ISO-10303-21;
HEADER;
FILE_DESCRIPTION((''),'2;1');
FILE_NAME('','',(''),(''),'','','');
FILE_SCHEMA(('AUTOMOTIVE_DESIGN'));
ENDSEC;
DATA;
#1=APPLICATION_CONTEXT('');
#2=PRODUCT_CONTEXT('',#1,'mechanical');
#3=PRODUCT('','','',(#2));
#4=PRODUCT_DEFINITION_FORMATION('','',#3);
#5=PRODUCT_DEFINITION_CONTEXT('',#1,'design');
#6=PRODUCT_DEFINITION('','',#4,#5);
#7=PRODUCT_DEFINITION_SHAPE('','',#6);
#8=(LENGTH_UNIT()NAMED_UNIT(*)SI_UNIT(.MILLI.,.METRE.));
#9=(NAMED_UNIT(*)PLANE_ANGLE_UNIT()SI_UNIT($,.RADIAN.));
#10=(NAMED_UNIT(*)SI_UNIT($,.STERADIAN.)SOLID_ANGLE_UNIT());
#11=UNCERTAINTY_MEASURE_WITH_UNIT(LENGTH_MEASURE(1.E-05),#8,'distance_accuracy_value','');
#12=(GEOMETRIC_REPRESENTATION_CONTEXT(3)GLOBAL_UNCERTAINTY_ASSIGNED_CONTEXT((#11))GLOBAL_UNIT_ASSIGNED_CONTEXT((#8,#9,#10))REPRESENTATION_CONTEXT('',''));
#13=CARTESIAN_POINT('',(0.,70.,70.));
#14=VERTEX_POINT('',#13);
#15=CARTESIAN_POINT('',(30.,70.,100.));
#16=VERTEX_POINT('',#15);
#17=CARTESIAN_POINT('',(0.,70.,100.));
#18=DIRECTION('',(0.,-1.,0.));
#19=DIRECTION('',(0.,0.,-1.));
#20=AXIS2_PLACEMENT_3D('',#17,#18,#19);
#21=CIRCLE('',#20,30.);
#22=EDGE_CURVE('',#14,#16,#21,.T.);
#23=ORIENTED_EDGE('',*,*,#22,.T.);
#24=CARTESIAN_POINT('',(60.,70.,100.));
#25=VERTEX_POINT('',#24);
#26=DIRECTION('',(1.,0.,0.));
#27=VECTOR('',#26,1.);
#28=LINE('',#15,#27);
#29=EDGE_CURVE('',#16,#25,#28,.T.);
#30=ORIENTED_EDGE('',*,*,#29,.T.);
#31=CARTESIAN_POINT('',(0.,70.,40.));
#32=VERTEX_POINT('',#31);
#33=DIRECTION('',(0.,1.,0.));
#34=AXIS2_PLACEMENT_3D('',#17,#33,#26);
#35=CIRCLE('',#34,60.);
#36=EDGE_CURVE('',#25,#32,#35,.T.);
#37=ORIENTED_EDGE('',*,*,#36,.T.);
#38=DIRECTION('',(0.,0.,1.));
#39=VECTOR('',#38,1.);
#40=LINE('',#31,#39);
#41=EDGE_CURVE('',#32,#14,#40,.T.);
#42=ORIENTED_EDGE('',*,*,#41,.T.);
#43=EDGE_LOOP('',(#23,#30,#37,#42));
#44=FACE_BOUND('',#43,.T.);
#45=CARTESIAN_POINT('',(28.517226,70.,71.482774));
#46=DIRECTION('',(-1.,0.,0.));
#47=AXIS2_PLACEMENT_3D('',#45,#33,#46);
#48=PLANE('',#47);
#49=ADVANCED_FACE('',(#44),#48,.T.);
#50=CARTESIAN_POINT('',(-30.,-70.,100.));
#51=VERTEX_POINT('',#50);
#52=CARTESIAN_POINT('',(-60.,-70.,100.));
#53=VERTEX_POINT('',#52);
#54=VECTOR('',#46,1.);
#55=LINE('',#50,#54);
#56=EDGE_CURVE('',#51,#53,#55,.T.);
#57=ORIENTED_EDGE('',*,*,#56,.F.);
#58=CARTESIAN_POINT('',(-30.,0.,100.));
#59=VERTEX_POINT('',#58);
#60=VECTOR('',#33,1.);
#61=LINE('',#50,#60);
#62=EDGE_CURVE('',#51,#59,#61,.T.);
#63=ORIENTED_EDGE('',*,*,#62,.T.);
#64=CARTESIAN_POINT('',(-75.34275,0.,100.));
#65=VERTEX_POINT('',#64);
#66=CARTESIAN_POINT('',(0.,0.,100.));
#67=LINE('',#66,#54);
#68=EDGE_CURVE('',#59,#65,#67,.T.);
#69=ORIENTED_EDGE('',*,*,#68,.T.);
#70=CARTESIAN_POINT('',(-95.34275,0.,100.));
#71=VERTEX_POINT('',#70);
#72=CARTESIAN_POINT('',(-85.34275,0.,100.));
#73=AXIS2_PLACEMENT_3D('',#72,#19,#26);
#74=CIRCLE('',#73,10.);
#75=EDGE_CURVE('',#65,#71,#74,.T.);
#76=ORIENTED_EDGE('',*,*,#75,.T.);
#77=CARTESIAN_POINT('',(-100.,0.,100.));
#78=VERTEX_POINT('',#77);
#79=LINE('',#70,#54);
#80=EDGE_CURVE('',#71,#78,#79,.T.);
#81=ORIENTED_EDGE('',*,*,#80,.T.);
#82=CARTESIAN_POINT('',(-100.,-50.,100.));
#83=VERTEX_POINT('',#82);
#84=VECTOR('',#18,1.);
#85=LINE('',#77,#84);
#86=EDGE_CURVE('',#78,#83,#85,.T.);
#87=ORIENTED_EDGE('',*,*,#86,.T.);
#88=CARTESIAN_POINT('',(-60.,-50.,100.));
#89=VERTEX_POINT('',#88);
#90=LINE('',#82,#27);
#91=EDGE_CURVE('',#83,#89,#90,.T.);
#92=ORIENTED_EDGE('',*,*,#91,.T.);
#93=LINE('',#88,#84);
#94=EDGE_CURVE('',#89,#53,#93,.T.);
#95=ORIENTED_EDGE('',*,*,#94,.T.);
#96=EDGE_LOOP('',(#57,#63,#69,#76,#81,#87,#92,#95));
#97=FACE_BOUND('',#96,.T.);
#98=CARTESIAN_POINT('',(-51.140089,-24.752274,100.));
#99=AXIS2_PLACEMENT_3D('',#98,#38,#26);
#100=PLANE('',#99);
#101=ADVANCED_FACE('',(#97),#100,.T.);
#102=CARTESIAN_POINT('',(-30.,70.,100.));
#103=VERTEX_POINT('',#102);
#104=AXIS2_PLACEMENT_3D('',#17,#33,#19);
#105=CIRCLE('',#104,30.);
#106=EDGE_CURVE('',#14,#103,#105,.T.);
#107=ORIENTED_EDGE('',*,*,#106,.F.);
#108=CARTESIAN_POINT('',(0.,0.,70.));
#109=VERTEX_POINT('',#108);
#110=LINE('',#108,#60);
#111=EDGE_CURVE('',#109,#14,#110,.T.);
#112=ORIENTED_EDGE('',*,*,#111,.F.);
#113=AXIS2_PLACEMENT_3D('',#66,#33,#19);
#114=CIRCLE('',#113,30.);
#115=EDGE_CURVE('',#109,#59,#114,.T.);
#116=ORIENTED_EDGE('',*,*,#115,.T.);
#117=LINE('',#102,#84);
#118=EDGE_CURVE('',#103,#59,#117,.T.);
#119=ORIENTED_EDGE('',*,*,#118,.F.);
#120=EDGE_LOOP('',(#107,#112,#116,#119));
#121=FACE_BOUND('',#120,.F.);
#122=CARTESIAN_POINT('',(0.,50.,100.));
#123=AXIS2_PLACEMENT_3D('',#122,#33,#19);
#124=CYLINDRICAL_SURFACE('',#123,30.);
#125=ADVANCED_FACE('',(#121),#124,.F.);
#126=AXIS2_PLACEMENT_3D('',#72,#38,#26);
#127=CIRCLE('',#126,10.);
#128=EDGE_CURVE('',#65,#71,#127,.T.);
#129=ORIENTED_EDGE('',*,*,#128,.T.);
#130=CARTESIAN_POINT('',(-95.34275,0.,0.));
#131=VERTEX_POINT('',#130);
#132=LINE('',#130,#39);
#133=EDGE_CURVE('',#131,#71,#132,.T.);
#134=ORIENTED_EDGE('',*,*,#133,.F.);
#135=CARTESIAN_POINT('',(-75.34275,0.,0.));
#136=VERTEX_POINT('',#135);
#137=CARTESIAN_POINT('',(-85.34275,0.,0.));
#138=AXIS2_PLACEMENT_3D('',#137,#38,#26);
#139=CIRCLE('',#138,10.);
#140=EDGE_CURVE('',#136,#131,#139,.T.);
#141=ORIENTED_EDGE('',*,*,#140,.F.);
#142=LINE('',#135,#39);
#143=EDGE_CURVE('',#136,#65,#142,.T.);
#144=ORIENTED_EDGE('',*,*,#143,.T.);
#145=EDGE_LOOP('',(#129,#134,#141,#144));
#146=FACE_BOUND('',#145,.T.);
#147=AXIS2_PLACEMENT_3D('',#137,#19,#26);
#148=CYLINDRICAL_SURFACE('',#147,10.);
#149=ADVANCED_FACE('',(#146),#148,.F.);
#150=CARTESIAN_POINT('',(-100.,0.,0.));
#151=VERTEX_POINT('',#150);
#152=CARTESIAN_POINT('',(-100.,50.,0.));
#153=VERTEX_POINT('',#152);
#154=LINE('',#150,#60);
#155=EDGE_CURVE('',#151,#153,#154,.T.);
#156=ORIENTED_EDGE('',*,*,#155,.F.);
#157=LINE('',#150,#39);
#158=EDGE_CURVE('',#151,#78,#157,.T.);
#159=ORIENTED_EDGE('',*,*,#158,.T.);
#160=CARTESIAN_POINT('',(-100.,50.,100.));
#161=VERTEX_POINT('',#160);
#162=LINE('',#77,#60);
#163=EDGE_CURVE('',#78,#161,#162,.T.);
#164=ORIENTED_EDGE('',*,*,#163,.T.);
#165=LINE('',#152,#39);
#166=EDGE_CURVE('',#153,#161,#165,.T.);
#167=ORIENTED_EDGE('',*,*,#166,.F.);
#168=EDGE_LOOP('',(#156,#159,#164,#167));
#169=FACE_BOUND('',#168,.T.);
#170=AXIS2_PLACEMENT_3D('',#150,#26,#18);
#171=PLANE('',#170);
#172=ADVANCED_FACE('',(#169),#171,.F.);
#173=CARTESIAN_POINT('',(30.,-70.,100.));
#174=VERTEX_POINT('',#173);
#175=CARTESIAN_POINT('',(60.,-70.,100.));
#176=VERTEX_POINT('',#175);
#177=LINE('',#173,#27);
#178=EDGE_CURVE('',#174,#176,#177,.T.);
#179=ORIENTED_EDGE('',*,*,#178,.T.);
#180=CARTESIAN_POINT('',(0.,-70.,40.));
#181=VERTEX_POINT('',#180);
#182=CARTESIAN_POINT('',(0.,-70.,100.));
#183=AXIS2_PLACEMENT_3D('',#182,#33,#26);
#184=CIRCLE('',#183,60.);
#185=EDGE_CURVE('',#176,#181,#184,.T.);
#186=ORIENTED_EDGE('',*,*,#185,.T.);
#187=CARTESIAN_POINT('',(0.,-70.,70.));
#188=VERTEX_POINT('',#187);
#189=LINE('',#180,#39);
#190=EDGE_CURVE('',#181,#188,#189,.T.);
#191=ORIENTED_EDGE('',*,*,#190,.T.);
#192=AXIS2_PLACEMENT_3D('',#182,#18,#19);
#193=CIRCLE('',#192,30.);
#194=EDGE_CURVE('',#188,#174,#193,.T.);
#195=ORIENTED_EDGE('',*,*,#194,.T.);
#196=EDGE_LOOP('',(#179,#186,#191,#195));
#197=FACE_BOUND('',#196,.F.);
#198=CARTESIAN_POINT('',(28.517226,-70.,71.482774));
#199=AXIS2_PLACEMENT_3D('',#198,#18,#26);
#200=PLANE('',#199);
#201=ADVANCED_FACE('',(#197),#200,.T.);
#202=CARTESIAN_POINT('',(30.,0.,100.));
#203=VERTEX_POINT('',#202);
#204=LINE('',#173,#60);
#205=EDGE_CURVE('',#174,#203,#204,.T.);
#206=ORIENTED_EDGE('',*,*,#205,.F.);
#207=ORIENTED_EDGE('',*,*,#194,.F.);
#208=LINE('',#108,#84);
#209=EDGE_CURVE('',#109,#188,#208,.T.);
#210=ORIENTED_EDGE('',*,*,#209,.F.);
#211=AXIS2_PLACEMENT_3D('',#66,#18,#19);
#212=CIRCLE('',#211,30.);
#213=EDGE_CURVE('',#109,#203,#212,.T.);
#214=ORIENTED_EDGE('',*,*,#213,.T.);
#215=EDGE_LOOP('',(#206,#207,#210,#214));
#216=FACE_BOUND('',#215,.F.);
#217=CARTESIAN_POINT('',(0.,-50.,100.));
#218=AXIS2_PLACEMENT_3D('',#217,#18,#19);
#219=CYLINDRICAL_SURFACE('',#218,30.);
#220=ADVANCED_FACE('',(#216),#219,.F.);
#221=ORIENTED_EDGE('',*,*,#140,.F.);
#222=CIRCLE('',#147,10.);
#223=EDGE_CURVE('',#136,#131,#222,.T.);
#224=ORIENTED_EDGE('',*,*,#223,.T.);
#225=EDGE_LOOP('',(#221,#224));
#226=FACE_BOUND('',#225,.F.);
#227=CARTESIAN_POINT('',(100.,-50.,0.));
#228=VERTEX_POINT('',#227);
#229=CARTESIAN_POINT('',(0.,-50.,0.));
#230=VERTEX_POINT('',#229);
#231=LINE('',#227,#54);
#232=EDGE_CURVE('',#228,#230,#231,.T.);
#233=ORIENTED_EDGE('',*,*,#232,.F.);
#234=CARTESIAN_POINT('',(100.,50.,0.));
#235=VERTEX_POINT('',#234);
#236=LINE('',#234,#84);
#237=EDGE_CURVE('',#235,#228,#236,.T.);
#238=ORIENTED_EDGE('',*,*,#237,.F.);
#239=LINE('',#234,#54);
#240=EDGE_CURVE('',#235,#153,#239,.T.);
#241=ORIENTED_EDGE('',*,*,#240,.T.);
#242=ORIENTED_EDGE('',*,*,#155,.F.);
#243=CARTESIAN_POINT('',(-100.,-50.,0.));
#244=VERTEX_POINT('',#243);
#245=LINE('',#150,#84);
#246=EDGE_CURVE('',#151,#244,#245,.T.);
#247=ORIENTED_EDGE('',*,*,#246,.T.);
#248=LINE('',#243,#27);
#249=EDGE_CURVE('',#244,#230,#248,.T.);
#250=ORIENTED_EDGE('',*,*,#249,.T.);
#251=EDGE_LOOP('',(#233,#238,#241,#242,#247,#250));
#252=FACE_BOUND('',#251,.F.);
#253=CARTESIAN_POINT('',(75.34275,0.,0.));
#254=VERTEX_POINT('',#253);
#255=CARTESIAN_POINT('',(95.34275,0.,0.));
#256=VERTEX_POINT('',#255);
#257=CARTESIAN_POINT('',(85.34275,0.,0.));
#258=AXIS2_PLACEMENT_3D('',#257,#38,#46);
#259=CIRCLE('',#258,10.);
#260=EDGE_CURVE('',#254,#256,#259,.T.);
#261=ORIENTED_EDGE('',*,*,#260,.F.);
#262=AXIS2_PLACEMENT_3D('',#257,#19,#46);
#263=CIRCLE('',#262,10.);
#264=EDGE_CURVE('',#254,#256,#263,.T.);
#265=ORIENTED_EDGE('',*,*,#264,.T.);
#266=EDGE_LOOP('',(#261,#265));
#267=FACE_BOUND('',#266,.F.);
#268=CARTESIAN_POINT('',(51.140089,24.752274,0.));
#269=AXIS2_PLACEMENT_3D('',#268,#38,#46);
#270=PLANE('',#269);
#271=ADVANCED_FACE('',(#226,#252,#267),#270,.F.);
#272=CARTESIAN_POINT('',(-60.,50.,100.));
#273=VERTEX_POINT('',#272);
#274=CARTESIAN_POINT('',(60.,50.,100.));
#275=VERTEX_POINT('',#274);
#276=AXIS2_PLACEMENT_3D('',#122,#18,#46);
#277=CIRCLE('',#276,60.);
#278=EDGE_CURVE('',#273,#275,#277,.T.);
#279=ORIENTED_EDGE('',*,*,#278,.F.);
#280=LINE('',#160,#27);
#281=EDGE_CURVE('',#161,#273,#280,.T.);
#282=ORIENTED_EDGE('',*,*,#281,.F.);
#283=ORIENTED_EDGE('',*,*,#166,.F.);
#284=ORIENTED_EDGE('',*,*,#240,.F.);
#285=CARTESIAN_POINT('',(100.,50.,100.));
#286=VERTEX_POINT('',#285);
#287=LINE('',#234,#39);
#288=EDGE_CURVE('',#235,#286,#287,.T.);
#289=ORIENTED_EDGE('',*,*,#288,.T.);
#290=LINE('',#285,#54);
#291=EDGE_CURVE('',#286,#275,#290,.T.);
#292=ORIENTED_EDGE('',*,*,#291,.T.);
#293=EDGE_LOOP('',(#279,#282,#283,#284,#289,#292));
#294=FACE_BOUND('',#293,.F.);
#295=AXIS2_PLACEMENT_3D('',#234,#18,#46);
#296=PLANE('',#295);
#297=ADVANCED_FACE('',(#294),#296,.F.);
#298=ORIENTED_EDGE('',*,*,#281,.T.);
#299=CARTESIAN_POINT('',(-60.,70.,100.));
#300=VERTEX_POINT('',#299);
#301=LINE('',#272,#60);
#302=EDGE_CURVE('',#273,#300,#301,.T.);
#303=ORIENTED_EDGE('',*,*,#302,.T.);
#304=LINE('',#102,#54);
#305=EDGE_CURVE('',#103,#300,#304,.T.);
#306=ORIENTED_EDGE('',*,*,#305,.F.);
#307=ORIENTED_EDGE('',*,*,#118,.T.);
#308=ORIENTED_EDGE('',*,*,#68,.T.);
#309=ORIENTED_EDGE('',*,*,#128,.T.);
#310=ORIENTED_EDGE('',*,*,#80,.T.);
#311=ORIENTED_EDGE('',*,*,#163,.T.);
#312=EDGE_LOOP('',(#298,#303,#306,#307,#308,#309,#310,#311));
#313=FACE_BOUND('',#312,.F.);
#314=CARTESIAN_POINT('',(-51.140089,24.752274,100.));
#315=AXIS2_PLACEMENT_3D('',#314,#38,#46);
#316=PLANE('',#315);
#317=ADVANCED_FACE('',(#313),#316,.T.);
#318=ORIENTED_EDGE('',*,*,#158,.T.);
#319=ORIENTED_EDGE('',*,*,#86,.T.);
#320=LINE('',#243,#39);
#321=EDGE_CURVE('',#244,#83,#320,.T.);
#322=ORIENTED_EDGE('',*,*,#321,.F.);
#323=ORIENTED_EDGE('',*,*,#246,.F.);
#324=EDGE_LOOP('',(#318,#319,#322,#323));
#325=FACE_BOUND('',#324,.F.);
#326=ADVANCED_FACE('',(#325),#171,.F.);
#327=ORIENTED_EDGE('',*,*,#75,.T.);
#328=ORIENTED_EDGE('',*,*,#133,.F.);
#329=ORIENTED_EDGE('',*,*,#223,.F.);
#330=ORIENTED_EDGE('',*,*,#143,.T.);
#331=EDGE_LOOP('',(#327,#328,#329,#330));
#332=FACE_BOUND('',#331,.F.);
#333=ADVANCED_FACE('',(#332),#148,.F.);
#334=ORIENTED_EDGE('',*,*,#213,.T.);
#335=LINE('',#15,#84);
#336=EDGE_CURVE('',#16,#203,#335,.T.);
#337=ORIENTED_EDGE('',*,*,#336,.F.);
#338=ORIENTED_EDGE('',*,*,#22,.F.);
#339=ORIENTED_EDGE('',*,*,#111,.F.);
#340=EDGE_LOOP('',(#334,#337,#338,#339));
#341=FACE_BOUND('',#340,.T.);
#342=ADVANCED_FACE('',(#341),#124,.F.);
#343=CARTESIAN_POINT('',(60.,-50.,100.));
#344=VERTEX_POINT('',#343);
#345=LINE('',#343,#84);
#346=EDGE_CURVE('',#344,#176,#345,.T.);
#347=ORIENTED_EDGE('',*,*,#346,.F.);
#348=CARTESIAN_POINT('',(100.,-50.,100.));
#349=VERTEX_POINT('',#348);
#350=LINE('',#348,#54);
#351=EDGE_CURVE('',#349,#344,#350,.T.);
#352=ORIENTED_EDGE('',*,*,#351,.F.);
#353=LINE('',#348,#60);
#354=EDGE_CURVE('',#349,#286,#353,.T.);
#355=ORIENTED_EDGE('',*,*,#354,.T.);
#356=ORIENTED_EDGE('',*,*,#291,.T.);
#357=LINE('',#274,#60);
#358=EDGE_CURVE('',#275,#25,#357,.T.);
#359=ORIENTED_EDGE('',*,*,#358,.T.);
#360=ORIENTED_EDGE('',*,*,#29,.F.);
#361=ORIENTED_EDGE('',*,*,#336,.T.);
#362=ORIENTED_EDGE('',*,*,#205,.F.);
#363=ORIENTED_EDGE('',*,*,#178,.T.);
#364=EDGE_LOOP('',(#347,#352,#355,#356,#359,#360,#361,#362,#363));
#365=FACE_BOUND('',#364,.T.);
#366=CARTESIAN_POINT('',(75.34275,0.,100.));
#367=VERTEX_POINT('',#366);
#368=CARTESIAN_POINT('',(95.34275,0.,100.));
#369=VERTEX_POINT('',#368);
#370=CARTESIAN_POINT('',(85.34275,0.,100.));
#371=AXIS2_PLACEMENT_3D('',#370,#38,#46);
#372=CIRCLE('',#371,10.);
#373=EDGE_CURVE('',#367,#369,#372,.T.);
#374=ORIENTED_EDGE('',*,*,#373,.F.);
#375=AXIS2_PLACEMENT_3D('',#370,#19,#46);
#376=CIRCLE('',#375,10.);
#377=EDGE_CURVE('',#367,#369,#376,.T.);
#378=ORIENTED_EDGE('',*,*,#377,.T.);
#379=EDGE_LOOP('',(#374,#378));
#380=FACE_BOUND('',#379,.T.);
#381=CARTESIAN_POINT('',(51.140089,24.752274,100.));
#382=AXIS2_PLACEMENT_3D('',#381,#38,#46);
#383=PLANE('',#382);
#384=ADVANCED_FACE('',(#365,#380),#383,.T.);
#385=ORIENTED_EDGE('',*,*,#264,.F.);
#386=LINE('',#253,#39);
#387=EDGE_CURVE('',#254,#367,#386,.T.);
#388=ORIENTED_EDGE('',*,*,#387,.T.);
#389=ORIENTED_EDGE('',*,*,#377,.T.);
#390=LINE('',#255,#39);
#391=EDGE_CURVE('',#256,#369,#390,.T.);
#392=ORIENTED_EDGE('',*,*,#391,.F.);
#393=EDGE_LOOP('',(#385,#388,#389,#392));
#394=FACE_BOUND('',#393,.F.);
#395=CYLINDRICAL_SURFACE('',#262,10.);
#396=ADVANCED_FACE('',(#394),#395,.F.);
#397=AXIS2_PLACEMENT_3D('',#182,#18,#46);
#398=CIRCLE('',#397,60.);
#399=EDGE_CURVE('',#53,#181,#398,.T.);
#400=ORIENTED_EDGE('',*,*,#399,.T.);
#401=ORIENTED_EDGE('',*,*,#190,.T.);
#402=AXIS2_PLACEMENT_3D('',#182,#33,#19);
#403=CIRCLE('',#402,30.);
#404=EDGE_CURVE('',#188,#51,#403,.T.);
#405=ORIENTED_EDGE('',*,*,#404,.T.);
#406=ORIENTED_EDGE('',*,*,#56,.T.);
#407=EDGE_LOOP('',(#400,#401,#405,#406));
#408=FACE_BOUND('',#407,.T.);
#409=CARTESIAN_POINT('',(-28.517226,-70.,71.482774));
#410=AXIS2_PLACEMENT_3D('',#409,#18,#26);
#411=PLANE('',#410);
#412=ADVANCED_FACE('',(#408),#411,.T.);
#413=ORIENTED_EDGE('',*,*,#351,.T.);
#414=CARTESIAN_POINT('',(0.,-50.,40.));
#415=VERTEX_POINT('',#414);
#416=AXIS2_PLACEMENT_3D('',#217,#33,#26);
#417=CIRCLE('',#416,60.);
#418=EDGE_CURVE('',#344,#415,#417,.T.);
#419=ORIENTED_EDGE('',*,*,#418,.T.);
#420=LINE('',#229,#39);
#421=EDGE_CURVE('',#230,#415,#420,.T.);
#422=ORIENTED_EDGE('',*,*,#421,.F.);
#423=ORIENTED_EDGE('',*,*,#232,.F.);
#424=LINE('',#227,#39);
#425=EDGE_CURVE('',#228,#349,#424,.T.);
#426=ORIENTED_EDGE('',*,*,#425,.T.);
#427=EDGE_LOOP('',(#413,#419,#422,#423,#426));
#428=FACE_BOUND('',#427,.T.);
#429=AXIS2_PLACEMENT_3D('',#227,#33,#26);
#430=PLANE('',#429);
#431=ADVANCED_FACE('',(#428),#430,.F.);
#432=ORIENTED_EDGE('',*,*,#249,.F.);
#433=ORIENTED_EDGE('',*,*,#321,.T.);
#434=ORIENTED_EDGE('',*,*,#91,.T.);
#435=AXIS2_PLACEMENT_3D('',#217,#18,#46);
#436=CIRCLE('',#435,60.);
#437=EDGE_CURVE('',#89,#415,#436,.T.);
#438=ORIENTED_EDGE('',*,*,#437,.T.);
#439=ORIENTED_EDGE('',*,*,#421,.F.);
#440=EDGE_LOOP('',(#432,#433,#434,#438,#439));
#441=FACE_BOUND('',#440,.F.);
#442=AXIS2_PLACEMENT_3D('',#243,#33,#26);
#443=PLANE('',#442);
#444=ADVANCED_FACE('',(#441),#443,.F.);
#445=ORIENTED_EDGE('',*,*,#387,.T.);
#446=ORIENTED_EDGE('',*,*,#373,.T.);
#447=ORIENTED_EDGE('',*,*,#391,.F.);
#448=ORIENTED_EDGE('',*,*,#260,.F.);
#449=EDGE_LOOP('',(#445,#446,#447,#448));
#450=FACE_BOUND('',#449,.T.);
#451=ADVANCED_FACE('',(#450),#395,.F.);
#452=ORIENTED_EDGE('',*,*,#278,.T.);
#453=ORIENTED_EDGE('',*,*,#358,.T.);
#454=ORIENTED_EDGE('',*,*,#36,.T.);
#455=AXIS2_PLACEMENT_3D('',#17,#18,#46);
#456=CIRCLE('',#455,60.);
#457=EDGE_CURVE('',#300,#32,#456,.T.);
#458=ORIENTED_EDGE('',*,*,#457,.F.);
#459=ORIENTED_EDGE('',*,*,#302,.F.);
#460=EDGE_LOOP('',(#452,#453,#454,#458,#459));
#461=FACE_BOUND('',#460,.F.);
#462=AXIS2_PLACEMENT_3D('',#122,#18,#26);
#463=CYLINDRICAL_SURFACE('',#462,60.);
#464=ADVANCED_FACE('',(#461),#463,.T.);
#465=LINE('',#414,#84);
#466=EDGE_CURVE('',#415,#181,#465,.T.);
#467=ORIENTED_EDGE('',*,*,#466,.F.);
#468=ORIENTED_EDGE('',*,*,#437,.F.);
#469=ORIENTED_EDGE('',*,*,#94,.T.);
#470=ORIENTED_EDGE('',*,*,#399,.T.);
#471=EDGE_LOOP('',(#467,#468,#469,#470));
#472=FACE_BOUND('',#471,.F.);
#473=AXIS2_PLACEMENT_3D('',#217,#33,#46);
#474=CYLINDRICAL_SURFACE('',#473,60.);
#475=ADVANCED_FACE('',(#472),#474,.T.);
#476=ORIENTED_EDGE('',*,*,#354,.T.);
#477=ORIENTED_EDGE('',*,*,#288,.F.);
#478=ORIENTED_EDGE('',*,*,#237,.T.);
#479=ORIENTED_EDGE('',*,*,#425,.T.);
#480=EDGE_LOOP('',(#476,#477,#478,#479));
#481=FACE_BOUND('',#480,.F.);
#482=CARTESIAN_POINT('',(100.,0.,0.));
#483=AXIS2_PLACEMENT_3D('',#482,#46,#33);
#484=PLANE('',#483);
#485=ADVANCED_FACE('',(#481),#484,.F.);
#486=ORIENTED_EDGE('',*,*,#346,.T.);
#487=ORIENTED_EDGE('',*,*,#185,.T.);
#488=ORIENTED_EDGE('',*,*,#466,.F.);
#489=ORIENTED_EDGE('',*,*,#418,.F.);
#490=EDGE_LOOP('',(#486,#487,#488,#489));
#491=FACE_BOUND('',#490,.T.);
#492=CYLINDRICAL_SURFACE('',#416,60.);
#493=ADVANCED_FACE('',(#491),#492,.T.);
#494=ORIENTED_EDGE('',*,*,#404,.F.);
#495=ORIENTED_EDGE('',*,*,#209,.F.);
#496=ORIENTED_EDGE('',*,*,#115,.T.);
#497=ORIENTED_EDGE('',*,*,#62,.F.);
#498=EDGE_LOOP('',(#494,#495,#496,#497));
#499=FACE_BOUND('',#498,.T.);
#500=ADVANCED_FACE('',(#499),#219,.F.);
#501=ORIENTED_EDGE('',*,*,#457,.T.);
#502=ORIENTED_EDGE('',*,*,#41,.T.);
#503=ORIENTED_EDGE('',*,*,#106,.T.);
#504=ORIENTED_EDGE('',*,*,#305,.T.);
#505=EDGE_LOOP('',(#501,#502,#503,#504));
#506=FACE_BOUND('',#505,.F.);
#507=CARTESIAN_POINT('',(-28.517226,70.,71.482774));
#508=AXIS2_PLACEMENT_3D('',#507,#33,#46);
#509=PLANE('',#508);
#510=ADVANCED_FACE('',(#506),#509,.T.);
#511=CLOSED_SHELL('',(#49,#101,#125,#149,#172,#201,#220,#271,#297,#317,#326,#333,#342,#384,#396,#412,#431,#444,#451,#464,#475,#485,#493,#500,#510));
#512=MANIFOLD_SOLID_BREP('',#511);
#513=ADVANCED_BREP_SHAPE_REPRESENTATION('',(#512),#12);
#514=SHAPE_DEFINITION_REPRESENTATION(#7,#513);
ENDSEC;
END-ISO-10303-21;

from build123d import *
from build123d import SkipClean  # not in build123d's __all__

# Parameters (mm, degrees)
F1_DEPTH = 100
F3_DEPTH = 20
F4_DEPTH = 50


with BuildPart() as f1:
    # F0 (on Top) → F1 (new body)
    with BuildSketch(Plane.XY):
        with BuildLine():
            Line((-100, -50), (0, -50))
            Line((0, -50), (0, 0))
            Line((0, 0), (-75.3427499533, 0))
            ThreePointArc((-75.3427499533, 0), (-85.3427499533, -10), (-95.3427499533, 0))
            Line((-95.3427499533, 0), (-100, 0))
            Line((-100, 0), (-100, -50))
        make_face()
    extrude(amount=F1_DEPTH)

    # F2 (on face) → F3 (join)
    with BuildSketch(Plane.XZ.offset(50)):
        with BuildLine():
            ThreePointArc((0, 70), (-21.2132034356, 78.7867965644), (-30, 100))
            Line((-30, 100), (-60, 100))
            ThreePointArc((-60, 100), (-42.4264068712, 57.5735931288), (0, 40))
            Line((0, 40), (0, 70))
        make_face()
    extrude(amount=F3_DEPTH)

    # F4 (cut, through all): a face of the model
    f4_faces = [f1.faces().sort_by_distance(p)[0] for p in [
        (-12.7323954474, -50, 87.2676045526),
    ]]
    extrude(f4_faces, amount=-F4_DEPTH, mode=Mode.SUBTRACT)

    # F5: F1 across plane


with BuildPart() as f1_1:
    add(f1.part, clean=False)
    with SkipClean():  # cleaning this boolean's faces spoils the solid; the shape is the same uncleaned
        add(f1.part.mirror(Plane.XZ), clean=False)

    # F6: F1 across face


with BuildPart() as f1_2:
    add(f1_1.part, clean=False)
    add(f1_1.part.mirror(Plane(origin=(0, -30.1219512195, 37.9268292683), x_dir=(0, 1, 0), z_dir=(1, 0, 0))), clean=False)


solid = f1_2.part
